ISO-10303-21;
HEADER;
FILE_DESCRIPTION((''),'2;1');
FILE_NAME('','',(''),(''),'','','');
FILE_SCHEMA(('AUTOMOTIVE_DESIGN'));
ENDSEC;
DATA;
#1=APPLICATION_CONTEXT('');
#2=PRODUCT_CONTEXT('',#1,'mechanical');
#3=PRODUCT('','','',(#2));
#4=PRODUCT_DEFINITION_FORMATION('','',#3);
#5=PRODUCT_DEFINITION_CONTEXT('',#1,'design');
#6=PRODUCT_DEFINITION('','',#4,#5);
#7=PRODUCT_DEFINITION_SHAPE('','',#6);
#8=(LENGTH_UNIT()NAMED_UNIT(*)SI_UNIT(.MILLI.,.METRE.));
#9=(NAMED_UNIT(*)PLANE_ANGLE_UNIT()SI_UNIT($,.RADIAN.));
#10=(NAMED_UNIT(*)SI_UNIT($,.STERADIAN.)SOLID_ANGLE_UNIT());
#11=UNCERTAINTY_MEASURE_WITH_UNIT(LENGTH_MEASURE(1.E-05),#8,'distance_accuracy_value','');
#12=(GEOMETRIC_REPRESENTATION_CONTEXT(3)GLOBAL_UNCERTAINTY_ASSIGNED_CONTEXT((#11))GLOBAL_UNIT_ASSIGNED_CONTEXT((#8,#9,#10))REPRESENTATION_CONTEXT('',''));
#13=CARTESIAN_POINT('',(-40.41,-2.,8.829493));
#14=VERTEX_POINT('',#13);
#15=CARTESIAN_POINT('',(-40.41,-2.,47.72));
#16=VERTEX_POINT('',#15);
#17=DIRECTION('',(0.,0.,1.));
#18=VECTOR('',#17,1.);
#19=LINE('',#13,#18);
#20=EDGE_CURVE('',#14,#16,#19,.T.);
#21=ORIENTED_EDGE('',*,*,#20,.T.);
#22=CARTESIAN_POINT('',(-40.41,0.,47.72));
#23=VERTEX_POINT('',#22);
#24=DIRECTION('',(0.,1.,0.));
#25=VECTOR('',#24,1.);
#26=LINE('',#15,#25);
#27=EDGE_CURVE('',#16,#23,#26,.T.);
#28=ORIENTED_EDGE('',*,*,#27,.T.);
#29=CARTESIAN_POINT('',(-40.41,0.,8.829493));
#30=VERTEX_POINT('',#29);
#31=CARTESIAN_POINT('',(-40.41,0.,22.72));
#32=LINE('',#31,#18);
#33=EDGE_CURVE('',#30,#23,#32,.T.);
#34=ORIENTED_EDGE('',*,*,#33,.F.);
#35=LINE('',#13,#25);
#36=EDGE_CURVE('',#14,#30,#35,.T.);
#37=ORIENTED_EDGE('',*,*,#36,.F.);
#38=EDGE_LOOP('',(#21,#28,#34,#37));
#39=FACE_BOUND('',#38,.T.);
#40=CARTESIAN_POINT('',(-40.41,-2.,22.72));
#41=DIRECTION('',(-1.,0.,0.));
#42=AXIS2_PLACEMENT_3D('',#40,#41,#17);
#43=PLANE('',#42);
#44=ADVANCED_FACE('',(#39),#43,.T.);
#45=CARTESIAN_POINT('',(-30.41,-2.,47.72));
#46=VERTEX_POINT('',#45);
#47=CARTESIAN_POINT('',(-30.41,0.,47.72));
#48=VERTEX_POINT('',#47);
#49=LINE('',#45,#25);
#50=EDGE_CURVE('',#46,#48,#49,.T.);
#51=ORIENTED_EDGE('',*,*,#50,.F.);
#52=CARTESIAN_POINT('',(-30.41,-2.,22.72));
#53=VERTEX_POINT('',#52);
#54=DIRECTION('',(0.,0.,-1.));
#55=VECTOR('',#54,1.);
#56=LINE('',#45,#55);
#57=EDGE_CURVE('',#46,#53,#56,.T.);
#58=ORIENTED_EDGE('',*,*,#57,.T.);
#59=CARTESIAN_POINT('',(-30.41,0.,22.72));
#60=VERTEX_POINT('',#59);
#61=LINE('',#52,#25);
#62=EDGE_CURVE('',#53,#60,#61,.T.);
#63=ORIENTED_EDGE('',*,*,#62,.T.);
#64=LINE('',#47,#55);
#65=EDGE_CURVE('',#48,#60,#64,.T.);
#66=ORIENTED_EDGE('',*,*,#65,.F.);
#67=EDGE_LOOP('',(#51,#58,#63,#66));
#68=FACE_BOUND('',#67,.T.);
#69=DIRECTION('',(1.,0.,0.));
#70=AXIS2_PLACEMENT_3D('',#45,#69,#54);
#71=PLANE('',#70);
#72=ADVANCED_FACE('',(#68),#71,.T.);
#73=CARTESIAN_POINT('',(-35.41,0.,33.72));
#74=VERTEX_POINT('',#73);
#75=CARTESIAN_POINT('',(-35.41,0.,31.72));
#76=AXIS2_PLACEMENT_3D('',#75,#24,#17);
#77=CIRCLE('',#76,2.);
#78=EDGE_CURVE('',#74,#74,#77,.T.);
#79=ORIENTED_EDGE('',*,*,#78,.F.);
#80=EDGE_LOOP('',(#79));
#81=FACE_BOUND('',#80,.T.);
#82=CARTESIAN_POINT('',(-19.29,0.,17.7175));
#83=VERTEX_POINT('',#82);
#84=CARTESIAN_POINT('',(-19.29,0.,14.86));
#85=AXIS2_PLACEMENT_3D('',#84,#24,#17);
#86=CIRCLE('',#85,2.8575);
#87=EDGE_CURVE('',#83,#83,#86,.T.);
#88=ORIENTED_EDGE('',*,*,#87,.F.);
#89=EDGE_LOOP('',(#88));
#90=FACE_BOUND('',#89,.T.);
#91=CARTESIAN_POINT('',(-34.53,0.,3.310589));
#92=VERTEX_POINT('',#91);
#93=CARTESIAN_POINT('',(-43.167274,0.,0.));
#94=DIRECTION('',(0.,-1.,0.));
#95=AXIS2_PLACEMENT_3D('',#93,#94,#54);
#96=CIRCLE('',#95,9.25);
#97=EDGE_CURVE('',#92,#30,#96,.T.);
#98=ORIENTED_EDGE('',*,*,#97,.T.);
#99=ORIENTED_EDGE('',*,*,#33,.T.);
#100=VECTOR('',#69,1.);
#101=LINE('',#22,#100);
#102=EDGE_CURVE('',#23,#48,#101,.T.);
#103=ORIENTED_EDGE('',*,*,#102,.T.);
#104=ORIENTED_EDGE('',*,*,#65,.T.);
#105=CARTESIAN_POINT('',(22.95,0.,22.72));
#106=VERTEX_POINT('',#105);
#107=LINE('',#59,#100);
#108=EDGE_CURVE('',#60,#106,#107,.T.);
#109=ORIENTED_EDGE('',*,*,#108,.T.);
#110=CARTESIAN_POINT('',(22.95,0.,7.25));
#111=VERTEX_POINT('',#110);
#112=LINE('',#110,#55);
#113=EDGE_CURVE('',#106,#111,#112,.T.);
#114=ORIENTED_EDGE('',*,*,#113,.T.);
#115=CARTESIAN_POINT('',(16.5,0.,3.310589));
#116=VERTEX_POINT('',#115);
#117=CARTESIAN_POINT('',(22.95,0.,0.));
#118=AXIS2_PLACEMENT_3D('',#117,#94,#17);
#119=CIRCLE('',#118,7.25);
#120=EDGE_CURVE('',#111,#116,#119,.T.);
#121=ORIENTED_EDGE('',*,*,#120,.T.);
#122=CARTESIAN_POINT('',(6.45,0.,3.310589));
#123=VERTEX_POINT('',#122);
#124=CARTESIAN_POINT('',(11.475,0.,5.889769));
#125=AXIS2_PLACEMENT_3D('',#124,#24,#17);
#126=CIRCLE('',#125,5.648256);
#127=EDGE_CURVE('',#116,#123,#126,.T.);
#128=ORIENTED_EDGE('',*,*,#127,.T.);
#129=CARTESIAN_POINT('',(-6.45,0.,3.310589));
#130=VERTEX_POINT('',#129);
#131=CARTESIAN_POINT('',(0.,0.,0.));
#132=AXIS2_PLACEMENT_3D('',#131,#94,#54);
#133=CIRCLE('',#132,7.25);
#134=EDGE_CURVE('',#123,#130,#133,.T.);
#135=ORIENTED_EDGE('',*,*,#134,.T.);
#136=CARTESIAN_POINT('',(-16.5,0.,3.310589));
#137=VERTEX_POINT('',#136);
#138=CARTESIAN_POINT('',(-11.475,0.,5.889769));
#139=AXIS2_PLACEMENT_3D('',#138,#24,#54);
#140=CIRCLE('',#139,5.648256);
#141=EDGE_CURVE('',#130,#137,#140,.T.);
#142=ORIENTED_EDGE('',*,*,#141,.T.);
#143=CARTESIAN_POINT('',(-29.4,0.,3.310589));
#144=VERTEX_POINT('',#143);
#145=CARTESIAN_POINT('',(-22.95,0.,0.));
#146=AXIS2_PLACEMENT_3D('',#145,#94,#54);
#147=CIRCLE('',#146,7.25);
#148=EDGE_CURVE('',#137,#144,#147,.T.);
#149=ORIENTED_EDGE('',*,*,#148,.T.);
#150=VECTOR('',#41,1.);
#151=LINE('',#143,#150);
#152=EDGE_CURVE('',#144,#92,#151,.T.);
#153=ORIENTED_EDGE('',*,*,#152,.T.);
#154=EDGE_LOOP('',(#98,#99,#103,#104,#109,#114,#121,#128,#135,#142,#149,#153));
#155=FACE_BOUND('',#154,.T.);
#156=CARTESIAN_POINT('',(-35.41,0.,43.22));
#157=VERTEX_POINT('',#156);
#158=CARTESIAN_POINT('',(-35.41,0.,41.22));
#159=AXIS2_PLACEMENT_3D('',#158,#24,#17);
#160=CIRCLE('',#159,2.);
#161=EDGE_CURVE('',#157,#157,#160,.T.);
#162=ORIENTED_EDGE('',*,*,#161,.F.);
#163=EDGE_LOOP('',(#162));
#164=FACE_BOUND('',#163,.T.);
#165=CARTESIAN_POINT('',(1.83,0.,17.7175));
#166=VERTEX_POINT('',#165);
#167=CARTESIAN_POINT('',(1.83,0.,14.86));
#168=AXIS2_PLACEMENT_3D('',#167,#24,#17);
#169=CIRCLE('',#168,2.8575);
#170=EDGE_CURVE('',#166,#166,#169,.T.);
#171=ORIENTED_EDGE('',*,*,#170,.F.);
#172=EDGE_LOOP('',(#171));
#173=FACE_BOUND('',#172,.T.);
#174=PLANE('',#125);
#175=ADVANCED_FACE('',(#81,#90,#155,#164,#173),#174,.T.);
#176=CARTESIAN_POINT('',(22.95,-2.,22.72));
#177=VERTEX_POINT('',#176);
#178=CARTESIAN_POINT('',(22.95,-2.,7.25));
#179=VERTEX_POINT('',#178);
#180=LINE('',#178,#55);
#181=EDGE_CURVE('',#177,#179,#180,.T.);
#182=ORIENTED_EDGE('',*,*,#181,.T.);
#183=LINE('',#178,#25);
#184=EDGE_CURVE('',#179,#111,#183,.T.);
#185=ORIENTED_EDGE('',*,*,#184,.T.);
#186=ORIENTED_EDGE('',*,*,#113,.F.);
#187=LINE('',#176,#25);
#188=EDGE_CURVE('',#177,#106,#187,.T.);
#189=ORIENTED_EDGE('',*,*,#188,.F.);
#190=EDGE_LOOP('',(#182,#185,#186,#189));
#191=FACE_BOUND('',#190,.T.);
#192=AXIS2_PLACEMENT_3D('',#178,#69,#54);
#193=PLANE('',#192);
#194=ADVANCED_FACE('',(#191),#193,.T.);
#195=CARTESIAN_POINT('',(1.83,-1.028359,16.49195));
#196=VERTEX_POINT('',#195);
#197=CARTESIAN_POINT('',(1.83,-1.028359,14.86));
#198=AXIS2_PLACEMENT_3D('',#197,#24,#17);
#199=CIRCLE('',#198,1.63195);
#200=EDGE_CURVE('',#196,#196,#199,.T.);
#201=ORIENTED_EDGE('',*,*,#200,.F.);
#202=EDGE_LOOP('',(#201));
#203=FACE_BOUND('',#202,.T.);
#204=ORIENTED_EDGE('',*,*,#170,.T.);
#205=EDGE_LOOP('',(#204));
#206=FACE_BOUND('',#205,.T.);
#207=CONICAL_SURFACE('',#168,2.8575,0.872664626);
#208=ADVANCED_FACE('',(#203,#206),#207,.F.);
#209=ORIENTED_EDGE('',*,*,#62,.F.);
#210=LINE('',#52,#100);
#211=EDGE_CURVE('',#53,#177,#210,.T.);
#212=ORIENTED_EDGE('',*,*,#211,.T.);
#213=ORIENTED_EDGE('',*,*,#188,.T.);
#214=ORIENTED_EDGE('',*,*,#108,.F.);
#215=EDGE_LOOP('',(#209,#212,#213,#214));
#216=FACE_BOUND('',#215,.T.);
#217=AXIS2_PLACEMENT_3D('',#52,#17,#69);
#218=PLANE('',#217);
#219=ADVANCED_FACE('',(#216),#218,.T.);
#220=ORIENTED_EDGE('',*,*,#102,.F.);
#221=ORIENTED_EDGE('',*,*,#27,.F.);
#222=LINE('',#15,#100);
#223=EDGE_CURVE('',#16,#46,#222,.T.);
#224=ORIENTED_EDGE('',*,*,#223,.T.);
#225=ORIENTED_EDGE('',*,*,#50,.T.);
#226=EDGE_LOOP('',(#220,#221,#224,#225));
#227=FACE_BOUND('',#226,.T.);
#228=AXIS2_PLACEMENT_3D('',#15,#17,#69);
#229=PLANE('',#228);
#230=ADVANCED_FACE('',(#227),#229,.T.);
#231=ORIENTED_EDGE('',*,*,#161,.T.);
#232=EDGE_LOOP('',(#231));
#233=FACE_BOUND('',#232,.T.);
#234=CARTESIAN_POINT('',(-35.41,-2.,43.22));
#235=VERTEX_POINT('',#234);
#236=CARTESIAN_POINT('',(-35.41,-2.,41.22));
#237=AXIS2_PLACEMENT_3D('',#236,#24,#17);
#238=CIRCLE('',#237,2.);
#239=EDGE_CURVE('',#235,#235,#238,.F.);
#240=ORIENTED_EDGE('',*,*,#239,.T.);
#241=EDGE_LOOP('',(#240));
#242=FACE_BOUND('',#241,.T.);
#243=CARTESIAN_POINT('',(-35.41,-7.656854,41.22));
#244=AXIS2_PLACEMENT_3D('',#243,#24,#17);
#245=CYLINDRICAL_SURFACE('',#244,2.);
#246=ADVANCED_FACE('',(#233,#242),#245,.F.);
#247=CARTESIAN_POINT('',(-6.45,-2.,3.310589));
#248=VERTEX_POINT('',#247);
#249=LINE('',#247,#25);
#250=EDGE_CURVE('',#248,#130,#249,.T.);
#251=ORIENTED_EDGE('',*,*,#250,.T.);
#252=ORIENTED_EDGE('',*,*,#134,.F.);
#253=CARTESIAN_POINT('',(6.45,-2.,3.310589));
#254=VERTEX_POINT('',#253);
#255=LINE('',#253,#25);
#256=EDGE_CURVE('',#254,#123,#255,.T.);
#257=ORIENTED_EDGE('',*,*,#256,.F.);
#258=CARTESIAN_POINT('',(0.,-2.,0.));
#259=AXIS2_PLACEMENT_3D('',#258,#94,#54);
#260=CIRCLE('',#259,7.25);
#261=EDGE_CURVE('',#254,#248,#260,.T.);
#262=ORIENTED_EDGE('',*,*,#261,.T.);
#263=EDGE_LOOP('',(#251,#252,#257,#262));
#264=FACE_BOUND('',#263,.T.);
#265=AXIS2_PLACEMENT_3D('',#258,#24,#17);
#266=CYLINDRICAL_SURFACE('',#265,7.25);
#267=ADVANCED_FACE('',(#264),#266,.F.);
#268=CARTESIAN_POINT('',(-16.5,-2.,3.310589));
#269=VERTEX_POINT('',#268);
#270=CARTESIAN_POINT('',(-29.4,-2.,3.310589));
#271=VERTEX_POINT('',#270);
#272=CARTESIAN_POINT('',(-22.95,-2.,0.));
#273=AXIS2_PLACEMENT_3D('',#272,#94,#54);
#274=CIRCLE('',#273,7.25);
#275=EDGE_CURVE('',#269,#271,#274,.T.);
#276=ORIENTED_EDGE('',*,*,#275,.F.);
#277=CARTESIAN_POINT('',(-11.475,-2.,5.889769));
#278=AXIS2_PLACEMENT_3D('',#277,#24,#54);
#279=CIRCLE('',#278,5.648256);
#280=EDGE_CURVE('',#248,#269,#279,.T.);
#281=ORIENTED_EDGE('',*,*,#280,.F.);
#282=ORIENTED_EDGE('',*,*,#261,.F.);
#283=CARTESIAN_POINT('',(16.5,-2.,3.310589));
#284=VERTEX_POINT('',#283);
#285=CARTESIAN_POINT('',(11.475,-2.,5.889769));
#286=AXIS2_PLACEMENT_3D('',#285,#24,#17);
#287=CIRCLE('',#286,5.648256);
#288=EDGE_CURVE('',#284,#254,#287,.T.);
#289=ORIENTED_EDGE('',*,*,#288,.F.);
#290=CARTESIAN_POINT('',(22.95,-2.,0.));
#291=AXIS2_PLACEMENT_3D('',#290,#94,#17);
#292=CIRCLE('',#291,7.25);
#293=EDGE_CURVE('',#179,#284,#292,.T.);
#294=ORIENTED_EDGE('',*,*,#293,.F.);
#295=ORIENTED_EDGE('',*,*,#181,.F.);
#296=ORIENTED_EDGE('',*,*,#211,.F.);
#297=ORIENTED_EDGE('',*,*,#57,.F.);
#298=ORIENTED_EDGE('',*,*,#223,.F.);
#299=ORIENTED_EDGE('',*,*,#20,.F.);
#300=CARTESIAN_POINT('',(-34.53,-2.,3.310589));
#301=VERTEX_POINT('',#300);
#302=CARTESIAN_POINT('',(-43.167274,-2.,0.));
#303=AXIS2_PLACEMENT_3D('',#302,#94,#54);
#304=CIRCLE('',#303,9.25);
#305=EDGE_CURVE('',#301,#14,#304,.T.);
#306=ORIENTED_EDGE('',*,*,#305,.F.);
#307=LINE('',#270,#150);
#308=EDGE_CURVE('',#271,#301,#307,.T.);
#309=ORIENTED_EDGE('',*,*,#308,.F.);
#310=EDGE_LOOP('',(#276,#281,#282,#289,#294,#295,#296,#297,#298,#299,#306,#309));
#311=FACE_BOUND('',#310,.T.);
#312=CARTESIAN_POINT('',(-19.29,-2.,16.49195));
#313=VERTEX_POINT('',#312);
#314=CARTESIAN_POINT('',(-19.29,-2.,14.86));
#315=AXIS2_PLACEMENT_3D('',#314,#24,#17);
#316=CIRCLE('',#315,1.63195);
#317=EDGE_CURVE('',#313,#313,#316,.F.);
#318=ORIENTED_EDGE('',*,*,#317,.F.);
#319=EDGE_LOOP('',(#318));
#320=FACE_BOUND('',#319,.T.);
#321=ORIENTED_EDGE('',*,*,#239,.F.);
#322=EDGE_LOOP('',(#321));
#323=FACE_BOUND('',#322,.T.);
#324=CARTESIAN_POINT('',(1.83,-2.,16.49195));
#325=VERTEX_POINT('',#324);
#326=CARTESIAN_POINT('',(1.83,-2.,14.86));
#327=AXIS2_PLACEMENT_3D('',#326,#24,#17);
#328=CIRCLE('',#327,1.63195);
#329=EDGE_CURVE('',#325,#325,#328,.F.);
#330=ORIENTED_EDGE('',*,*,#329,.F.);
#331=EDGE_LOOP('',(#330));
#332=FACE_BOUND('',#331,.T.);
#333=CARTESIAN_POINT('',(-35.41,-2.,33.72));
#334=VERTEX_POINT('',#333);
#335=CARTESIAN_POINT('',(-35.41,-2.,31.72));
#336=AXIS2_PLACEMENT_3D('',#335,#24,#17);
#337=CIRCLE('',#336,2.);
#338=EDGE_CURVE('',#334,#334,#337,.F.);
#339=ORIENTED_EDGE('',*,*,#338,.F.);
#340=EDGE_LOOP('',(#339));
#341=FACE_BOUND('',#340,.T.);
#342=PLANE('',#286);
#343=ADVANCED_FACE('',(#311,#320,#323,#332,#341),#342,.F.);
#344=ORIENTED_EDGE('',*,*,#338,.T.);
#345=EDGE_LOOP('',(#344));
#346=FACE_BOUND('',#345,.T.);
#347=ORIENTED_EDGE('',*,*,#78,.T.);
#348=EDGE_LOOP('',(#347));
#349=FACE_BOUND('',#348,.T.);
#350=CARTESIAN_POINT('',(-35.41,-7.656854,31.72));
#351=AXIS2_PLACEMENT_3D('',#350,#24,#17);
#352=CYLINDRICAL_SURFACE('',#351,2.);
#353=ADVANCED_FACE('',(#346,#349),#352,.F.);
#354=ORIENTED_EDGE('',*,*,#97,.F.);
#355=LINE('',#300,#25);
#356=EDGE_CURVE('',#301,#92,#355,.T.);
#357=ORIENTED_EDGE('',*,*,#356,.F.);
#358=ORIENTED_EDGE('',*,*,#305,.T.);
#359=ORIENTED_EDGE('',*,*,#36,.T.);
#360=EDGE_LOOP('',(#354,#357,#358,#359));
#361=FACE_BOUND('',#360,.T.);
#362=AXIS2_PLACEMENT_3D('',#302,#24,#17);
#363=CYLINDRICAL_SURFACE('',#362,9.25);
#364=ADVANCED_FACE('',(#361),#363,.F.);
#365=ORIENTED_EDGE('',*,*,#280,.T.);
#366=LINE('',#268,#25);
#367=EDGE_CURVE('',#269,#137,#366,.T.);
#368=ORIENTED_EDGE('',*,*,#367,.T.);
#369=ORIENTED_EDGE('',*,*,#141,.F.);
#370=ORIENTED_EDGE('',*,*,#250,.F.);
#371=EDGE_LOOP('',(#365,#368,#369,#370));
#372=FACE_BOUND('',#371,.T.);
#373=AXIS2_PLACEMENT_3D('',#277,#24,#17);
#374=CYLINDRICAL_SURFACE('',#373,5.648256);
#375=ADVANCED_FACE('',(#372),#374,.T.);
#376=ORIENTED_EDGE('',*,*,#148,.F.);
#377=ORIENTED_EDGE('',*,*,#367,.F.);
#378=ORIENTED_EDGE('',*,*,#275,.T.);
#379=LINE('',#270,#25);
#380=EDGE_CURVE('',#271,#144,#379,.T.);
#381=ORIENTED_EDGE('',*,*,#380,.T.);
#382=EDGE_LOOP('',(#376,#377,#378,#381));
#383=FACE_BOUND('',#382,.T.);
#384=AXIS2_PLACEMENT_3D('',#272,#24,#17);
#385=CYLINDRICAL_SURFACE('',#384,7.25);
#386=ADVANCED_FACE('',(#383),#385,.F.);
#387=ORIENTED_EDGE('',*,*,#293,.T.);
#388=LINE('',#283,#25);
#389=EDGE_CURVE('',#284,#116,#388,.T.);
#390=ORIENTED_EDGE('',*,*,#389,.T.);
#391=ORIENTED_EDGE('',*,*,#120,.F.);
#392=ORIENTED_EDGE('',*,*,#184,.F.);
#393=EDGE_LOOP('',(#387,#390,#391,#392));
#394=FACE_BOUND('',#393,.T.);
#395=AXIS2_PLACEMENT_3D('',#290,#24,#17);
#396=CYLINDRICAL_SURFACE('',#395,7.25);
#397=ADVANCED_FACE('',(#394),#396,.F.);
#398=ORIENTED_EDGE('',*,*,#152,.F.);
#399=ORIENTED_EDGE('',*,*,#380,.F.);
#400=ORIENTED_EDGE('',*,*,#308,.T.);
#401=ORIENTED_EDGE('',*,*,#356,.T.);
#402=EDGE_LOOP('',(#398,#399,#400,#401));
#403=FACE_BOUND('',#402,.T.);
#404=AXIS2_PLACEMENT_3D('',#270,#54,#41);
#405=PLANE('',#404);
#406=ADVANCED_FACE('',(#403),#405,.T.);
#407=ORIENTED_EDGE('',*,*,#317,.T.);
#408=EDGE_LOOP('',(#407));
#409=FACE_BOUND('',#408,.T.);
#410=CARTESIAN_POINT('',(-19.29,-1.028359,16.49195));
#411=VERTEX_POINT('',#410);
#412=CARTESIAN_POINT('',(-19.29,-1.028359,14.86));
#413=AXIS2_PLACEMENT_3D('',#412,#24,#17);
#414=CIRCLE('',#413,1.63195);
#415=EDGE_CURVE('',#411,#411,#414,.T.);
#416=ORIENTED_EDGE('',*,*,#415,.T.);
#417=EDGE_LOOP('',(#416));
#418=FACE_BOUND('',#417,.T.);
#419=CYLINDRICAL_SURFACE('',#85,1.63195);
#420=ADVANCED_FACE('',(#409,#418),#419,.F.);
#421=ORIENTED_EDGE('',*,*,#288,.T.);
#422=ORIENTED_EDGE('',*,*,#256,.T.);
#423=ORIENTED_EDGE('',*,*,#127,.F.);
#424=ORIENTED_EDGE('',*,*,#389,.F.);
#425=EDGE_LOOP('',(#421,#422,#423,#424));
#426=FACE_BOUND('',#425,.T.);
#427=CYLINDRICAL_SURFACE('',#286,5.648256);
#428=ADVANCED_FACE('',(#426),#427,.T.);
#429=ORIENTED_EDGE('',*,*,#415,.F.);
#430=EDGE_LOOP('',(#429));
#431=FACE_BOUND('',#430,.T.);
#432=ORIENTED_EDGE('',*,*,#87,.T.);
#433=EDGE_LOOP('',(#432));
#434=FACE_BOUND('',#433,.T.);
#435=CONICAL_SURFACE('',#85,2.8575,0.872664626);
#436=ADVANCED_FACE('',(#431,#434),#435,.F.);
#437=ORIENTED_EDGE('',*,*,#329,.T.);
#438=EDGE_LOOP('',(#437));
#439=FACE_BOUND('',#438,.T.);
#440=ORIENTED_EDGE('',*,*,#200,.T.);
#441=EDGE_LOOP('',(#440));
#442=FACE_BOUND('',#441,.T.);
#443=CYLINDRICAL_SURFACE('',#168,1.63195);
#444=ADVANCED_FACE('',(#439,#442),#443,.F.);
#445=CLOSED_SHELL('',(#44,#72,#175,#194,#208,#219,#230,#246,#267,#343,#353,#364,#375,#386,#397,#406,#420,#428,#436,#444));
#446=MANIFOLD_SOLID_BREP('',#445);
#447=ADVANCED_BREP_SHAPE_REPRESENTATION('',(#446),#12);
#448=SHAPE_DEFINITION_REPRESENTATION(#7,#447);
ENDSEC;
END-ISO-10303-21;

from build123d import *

# Parameters (mm, degrees)
BASE_FLANGE1_DEPTH                                = 2
SKETCH7_R                                         = 2
CUT_EXTRUDE1_DEPTH                                = 2
CSK_FOR_4_FLAT_HEAD_MACHINE_SCREW_100_D           = 3.2639
CSK_FOR_4_FLAT_HEAD_MACHINE_SCREW_100_DEPTH       = 2
CSK_FOR_4_FLAT_HEAD_MACHINE_SCREW_100_CSINK_D     = 5.715
CSK_FOR_4_FLAT_HEAD_MACHINE_SCREW_100_CSINK_ANGLE = 100
CSK_FOR_4_FLAT_HEAD_MACHINE_SCREW_100_TIP         = 0.980574487


# Sheet-metal steps are written as plain solids
with BuildPart() as part:
    # Sketch2 → Base-Flange1 (new body)
    with BuildSketch(Plane(origin=(0, 0, 0), x_dir=(1, 0, 0), z_dir=(0, 1, 0))):
        with BuildLine():
            Line((-29.4, -3.310589071), (-34.53, -3.310589071))
            ThreePointArc((-34.53, -3.310589071), (-36.836910234, -6.744553073), (-40.41, -8.829492668))
            Line((-40.41, -8.829492668), (-40.41, -22.72))
            Line((-40.41, -22.72), (-40.41, -47.72))
            Line((-40.41, -47.72), (-30.41, -47.72))
            Line((-30.41, -47.72), (-30.41, -22.72))
            Line((-30.41, -22.72), (22.95, -22.72))
            Line((22.95, -22.72), (22.95, -7.25))
            ThreePointArc((22.95, -7.25), (19.171063031, -6.187255885), (16.5, -3.310589071))
            ThreePointArc((16.5, -3.310589071), (11.475, -0.241513115), (6.45, -3.310589071))
            ThreePointArc((6.45, -3.310589071), (0, -7.25), (-6.45, -3.310589071))
            ThreePointArc((-6.45, -3.310589071), (-11.475, -0.241513115), (-16.5, -3.310589071))
            ThreePointArc((-16.5, -3.310589071), (-22.95, -7.25), (-29.4, -3.310589071))
        make_face()
    extrude(amount=-BASE_FLANGE1_DEPTH)

    # Sketch7 → Cut-Extrude1 (cut)
    with BuildSketch(Plane(origin=(0, 0, 0), x_dir=(1, 0, 0), z_dir=(0, 1, 0))):
        with Locations(Location((-35.41, -41.22, 0), (0, 0, 270))):
            Circle(SKETCH7_R)
        with Locations(Location((-35.41, -31.72, 0), (0, 0, 270))):
            Circle(SKETCH7_R)
    extrude(amount=-CUT_EXTRUDE1_DEPTH, mode=Mode.SUBTRACT)

    # CSK for #4 Flat Head Machine Screw (100)1
    with Locations(Plane(origin=(0, 0, 0), x_dir=(1, 0, 0), z_dir=(0, 1, 0))):
        with Locations((-19.29, -14.86), (1.83, -14.86)):
            CounterSinkHole(CSK_FOR_4_FLAT_HEAD_MACHINE_SCREW_100_D / 2, CSK_FOR_4_FLAT_HEAD_MACHINE_SCREW_100_CSINK_D / 2, depth=CSK_FOR_4_FLAT_HEAD_MACHINE_SCREW_100_DEPTH, counter_sink_angle=CSK_FOR_4_FLAT_HEAD_MACHINE_SCREW_100_CSINK_ANGLE)
            with Locations((0, 0, -(CSK_FOR_4_FLAT_HEAD_MACHINE_SCREW_100_DEPTH + CSK_FOR_4_FLAT_HEAD_MACHINE_SCREW_100_TIP / 2))):  # 118° drill point
                Cone(0, CSK_FOR_4_FLAT_HEAD_MACHINE_SCREW_100_D / 2, CSK_FOR_4_FLAT_HEAD_MACHINE_SCREW_100_TIP, mode=Mode.SUBTRACT)


solid = part.part
